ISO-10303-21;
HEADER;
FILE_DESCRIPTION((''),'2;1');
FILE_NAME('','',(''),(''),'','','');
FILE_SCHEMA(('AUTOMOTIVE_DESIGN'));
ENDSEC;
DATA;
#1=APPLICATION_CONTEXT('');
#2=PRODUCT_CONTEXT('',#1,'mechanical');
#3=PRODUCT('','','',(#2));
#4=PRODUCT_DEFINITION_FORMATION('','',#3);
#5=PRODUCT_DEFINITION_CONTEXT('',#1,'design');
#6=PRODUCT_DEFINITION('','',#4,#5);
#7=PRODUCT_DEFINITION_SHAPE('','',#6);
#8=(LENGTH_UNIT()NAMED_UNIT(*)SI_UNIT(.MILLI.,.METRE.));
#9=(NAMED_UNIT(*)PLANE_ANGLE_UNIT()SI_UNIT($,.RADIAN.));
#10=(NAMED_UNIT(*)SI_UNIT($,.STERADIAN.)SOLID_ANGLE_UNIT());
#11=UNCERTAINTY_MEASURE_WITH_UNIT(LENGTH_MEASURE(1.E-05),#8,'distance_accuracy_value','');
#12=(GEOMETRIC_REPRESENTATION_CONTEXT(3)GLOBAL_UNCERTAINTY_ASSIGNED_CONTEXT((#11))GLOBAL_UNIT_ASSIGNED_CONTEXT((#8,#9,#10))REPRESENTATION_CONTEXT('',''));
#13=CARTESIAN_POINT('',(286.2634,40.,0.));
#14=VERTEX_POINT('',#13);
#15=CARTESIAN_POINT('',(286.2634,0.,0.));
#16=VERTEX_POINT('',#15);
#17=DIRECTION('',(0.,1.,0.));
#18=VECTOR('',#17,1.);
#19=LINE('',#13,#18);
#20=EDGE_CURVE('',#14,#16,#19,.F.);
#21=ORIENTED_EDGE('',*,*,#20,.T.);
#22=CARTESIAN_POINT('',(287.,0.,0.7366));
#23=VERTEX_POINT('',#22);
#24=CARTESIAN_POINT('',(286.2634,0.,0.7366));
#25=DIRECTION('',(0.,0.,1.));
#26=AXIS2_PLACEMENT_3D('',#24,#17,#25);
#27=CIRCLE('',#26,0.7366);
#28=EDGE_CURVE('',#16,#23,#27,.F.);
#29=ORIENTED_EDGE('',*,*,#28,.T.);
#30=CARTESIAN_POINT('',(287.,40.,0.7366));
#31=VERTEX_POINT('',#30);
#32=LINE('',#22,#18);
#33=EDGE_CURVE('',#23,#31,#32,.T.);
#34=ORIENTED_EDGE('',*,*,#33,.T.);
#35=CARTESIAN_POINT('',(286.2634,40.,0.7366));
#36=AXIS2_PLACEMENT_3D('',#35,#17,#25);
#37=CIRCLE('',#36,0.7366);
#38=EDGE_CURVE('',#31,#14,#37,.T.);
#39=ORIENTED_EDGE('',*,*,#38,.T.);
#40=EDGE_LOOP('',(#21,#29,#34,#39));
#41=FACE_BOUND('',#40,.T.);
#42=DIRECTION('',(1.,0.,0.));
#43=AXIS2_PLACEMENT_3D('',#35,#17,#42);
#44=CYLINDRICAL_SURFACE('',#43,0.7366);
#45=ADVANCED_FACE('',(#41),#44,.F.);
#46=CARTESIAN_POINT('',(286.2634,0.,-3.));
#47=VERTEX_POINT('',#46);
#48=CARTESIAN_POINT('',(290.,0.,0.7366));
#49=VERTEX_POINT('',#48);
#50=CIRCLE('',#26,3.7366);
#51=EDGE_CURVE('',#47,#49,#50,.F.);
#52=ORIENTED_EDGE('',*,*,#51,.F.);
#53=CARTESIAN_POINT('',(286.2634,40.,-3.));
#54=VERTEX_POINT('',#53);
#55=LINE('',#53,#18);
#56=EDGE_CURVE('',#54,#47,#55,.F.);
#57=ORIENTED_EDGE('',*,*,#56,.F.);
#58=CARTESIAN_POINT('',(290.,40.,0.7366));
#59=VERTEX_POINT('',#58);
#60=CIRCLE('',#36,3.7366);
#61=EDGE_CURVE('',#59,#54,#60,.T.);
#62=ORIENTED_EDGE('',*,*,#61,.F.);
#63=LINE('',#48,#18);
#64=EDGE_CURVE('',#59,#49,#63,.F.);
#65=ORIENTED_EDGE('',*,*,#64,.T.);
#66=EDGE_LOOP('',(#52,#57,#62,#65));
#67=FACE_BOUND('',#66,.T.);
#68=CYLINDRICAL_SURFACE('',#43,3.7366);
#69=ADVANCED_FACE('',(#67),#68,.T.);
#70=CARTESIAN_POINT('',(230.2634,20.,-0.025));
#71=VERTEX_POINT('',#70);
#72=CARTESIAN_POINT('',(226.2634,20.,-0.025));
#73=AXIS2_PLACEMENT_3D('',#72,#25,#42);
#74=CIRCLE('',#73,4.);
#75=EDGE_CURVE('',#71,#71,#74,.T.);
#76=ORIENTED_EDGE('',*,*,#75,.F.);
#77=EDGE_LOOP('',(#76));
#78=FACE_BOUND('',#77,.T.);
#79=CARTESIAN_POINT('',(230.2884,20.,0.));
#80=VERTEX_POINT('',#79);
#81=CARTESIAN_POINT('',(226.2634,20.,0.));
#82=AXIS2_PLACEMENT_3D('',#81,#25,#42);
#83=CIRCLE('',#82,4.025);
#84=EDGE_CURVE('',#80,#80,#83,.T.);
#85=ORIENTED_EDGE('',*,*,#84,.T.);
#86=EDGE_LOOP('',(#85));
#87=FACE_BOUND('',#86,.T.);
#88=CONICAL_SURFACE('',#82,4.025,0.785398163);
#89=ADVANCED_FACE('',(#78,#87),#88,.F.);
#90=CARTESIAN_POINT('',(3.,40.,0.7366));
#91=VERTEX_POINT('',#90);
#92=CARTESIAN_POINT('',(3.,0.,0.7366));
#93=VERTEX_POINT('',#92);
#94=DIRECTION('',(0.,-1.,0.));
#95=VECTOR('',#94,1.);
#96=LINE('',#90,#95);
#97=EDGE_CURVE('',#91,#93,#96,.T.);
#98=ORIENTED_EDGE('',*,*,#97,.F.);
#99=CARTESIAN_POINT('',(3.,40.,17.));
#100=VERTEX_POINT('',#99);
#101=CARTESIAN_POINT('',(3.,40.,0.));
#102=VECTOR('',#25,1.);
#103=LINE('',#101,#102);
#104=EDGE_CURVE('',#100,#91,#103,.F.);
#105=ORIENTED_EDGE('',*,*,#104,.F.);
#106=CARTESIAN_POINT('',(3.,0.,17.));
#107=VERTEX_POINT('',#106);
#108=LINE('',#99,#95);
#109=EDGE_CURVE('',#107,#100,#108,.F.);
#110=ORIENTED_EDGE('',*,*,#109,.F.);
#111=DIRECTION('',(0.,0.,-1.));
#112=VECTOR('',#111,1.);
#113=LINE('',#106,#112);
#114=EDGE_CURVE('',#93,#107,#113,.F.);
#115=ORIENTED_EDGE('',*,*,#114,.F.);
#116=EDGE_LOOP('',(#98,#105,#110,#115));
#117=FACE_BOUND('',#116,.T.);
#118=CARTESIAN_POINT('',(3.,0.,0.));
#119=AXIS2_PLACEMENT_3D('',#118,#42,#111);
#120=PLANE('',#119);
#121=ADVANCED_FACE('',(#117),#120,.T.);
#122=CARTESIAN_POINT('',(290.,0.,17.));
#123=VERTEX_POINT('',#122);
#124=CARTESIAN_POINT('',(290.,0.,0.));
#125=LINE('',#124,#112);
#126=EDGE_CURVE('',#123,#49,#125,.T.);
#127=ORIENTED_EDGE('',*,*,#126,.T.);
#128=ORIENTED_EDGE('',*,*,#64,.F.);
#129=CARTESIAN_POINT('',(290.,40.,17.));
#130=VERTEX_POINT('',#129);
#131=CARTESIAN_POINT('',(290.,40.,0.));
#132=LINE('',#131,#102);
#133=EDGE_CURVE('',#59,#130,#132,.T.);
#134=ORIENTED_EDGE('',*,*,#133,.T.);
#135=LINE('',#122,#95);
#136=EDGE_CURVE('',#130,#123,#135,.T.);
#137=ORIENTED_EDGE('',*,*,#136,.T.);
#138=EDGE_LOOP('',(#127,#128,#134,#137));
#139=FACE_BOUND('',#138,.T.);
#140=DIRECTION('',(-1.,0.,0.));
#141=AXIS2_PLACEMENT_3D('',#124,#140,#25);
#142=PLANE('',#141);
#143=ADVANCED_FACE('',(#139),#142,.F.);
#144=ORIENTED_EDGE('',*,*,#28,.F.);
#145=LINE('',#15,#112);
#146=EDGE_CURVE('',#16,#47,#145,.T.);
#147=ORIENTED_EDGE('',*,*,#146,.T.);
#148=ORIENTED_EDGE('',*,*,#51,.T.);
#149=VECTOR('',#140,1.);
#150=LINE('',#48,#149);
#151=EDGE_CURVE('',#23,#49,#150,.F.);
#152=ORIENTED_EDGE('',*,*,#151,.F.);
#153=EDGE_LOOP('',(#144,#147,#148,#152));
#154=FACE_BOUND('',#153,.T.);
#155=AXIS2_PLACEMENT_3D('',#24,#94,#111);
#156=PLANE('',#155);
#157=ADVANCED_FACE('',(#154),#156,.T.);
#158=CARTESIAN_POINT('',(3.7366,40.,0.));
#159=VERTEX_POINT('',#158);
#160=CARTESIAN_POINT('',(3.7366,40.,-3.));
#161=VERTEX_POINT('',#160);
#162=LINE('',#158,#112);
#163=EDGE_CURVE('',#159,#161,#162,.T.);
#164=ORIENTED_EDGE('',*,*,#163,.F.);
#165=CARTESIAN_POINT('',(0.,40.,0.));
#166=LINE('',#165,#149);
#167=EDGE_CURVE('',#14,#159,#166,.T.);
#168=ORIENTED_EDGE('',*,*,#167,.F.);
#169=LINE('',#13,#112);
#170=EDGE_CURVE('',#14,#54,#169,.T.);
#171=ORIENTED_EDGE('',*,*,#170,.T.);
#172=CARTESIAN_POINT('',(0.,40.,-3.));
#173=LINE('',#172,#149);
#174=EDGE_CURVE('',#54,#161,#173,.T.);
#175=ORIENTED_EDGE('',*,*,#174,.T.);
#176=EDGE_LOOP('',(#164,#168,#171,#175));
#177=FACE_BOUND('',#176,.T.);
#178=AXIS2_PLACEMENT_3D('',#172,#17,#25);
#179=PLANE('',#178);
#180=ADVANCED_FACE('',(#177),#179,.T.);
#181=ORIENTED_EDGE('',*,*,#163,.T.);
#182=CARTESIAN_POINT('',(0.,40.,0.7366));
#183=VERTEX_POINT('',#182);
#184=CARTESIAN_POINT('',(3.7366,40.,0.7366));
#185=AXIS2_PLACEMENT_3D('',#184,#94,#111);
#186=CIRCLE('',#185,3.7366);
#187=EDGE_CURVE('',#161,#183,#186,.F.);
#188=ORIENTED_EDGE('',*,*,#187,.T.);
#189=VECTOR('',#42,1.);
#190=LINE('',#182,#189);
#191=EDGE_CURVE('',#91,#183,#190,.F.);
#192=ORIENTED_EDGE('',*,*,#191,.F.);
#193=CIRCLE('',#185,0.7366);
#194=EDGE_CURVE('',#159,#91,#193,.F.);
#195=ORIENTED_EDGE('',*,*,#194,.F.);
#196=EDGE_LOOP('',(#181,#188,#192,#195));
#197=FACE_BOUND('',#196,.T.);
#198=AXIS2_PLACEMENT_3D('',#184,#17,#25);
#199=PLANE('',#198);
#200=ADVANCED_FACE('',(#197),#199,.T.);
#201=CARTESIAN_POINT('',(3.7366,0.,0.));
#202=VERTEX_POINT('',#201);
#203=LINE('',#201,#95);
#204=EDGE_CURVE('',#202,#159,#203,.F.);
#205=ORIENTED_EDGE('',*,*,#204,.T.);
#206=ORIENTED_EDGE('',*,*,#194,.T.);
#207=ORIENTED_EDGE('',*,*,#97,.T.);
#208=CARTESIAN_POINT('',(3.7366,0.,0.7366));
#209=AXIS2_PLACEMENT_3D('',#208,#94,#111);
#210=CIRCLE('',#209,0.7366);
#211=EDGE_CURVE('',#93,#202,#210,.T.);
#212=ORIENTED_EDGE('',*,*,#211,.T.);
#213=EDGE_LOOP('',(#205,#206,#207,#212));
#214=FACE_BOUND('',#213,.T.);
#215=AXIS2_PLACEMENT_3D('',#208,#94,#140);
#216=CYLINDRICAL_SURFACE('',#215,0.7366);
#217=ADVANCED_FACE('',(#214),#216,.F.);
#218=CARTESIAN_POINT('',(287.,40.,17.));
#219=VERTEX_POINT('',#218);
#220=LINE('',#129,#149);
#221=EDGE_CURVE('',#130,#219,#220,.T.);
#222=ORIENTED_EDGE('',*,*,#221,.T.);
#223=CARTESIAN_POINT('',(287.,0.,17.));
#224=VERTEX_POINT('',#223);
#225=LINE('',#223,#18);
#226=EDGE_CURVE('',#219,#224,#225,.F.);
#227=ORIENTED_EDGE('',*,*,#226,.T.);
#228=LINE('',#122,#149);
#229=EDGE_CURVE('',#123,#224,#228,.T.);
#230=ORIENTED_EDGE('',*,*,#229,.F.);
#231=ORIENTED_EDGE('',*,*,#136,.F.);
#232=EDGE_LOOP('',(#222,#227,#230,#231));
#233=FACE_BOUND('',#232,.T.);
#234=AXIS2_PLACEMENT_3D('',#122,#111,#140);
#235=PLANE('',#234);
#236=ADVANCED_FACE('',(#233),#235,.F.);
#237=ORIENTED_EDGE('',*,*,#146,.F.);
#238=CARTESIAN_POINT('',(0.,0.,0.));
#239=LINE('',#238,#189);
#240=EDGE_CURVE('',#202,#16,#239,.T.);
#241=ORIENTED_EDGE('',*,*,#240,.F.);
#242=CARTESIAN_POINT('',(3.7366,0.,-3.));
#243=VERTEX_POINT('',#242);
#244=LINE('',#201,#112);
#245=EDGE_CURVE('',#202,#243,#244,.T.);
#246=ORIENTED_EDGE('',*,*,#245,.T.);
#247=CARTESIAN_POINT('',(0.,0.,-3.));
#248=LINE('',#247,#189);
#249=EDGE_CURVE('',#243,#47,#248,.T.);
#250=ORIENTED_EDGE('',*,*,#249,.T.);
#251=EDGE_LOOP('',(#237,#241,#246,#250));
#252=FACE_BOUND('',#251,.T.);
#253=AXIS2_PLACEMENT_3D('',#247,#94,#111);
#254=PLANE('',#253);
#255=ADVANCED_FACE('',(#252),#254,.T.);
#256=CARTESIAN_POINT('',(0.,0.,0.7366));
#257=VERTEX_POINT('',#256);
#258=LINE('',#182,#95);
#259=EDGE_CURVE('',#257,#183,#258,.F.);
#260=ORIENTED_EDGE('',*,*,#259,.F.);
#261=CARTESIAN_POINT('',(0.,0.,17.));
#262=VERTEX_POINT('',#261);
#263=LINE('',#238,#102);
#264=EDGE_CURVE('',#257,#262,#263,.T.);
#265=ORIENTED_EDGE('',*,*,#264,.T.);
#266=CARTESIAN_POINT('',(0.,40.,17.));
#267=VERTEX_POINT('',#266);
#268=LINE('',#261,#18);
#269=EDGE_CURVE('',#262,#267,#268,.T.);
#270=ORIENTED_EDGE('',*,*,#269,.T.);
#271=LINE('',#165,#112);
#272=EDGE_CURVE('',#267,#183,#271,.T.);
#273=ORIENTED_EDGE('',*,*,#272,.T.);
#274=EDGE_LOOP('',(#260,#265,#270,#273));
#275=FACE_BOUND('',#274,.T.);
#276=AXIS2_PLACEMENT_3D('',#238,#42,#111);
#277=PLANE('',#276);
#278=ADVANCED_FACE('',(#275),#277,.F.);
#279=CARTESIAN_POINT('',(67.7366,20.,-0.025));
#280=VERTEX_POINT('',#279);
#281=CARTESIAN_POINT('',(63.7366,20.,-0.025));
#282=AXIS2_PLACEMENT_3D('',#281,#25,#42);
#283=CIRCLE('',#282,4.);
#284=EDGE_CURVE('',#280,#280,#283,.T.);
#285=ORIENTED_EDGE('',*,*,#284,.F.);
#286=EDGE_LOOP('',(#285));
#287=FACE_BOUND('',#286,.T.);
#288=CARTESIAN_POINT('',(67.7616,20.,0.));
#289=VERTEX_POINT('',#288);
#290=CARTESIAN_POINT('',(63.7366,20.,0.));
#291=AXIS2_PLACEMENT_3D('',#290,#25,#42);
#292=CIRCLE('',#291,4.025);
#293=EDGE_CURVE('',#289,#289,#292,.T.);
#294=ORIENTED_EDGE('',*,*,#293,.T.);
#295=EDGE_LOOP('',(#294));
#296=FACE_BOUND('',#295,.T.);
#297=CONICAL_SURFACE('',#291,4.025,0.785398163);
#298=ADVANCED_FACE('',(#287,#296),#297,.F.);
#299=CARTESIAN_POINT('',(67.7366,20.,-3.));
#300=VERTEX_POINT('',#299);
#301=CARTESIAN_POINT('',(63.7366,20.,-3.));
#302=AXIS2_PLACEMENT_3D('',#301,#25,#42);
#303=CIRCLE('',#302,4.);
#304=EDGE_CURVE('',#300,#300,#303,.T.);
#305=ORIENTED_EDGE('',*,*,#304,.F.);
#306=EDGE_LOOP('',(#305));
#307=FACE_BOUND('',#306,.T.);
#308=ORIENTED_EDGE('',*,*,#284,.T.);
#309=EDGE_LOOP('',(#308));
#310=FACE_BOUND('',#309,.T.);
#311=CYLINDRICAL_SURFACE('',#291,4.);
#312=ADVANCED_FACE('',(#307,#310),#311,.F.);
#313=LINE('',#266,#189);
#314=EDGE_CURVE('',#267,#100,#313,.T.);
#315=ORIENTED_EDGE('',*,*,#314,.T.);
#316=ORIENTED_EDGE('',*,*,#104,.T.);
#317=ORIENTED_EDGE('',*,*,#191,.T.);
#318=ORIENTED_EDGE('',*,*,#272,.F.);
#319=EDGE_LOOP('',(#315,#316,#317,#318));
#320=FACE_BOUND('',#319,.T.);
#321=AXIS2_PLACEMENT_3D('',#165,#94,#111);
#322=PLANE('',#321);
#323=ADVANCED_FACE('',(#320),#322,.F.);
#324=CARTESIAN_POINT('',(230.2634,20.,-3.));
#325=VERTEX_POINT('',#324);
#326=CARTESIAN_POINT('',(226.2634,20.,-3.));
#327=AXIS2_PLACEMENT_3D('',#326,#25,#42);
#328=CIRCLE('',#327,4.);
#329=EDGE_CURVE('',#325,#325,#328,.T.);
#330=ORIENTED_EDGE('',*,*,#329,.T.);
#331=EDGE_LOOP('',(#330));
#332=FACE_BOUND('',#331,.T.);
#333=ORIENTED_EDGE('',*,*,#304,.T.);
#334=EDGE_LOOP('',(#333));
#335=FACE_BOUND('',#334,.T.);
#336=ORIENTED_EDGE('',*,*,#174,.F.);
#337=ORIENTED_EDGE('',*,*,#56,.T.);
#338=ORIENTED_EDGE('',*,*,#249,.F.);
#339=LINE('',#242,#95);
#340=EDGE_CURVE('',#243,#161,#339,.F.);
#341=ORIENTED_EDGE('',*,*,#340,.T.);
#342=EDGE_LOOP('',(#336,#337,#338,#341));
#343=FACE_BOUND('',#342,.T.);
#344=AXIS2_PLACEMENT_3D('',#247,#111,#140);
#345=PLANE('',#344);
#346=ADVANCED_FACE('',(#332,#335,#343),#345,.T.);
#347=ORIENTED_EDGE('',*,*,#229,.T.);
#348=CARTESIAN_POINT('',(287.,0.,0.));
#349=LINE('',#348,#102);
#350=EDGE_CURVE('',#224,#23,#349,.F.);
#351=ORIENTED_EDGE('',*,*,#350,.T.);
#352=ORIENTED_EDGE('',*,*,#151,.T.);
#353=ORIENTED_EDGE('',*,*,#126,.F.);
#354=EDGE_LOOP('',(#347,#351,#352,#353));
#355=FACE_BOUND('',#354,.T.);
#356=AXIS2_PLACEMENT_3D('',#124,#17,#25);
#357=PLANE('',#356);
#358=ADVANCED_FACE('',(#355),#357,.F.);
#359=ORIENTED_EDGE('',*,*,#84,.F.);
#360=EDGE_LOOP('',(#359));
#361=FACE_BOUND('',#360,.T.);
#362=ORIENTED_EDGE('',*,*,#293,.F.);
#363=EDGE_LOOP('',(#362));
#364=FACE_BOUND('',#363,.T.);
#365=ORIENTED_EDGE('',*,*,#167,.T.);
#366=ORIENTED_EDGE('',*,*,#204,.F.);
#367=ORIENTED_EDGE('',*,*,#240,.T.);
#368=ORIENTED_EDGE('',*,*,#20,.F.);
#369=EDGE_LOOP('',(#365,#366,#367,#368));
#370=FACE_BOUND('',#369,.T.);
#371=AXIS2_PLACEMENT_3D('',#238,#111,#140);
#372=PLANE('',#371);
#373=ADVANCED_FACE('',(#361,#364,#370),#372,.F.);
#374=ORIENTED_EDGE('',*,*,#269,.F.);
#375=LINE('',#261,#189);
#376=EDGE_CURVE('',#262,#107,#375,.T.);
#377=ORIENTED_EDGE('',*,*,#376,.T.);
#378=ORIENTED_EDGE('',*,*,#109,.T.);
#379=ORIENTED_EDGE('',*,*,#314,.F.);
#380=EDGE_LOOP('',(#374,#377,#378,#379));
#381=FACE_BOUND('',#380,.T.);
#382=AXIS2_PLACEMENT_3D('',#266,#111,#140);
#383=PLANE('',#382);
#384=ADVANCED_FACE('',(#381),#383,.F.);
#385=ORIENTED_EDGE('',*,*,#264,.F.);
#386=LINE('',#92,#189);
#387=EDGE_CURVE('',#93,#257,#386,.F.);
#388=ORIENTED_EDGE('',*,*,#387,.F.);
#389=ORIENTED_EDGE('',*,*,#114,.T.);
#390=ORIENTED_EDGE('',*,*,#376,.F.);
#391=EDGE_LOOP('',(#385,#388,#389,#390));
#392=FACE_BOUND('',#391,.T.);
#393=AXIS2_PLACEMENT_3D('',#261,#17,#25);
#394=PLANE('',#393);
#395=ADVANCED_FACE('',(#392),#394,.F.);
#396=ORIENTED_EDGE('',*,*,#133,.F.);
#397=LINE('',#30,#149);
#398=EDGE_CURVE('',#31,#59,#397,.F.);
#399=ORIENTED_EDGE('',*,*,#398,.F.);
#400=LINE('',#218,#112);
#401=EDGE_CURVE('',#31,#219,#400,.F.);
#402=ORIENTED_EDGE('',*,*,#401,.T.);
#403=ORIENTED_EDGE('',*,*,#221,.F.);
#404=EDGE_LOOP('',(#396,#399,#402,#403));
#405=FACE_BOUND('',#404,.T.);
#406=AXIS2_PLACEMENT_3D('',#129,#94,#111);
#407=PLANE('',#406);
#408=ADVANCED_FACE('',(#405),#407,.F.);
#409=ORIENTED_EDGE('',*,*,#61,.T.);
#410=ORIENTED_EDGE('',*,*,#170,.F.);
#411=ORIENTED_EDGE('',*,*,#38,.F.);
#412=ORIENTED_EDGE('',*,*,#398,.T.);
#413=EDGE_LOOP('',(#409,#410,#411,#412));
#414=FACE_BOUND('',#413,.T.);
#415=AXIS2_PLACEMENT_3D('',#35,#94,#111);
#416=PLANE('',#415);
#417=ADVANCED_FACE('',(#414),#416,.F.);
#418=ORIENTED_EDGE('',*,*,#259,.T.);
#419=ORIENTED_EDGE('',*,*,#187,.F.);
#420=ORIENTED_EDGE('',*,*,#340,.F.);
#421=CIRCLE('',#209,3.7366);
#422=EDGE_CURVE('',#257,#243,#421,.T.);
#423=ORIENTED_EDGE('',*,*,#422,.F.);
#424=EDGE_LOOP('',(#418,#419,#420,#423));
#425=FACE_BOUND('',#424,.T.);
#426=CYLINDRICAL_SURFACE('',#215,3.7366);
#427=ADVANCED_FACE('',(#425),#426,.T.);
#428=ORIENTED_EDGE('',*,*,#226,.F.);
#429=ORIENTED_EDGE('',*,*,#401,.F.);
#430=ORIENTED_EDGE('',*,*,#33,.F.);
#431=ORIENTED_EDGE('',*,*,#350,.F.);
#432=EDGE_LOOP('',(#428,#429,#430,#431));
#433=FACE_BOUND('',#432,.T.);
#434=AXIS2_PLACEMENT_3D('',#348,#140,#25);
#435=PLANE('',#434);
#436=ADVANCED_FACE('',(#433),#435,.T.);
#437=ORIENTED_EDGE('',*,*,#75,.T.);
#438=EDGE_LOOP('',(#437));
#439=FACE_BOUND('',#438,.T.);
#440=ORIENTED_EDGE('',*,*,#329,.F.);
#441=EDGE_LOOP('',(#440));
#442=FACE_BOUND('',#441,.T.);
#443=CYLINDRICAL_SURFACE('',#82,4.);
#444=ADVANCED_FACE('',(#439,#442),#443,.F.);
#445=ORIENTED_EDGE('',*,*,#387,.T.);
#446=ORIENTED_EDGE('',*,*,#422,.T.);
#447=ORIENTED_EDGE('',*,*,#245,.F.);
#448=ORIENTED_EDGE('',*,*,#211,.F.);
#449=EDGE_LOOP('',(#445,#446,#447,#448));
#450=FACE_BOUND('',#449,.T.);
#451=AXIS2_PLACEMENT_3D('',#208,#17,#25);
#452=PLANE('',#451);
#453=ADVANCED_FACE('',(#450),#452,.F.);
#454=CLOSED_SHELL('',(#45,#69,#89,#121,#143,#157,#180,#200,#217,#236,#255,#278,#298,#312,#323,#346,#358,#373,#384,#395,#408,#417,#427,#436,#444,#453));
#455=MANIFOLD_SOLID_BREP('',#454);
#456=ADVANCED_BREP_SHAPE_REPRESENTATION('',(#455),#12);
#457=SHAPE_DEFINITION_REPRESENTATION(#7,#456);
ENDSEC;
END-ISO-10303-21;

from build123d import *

# Parameters (mm, degrees)
SKETCH1_W                      = 290
SKETCH1_H                      = 40
BASE_FLANGE1_DEPTH             = 3
EDGE_FLANGE1_STRIP_W           = 13.4732
EDGE_FLANGE1_STRIP_H           = 3
EDGE_FLANGE1_STRIP_CUT_DEPTH   = 40
EDGE_FLANGE1_DEPTH             = 40
EDGE_FLANGE2_STRIP_W           = 13.4732
EDGE_FLANGE2_STRIP_H           = 3
EDGE_FLANGE2_STRIP_CUT_DEPTH   = 40
EDGE_FLANGE2_DEPTH             = 40
F_8_0MM_DOWEL_HOLE1_AT_2_COUNT = 2
F_8_0MM_DOWEL_HOLE1_AT_2_PITCH = 162.5268


# Sheet-metal steps are written as plain solids
with BuildPart() as part:
    # Sketch1 → Base-Flange1 (new body)
    with BuildSketch(Plane.XY):
        with Locations((145, 20)):
            Rectangle(SKETCH1_W, SKETCH1_H)
    extrude(amount=-BASE_FLANGE1_DEPTH)

    # Edge-Flange1 strip (across the edge) → Edge-Flange1 strip cut (cut)
    with BuildSketch(Plane.XZ.offset(-40)):
        with Locations((-3, -1.5)):
            Rectangle(EDGE_FLANGE1_STRIP_W, EDGE_FLANGE1_STRIP_H)
    extrude(amount=EDGE_FLANGE1_STRIP_CUT_DEPTH, mode=Mode.SUBTRACT)

    # Edge-Flange1 section (across the edge) → Edge-Flange1 (add)
    with BuildSketch(Plane.XZ.offset(-40)):
        with BuildLine():
            Line((0, 0.7366), (0, 17))
            Line((0, 17), (3, 17))
            Line((3, 17), (3, 0.7366))
            ThreePointArc((3, 0.7366), (3.215745145, 0.215745145), (3.7366, 0))
            Line((3.7366, 0), (3.7366, -3))
            ThreePointArc((3.7366, -3), (1.094424801, -1.905575199), (0, 0.7366))
        make_face()
    extrude(amount=EDGE_FLANGE1_DEPTH)

    # Edge-Flange2 strip (across the edge) → Edge-Flange2 strip cut (cut)
    with BuildSketch(Plane(origin=(290, 0, 0), x_dir=(-1, 0, 0), z_dir=(0, 1, 0))):
        with Locations((-3, -1.5)):
            Rectangle(EDGE_FLANGE2_STRIP_W, EDGE_FLANGE2_STRIP_H)
    extrude(amount=EDGE_FLANGE2_STRIP_CUT_DEPTH, mode=Mode.SUBTRACT)

    # Edge-Flange2 section (across the edge) → Edge-Flange2 (add)
    with BuildSketch(Plane(origin=(290, 0, 0), x_dir=(-1, 0, 0), z_dir=(0, 1, 0))):
        with BuildLine():
            Line((0, 0.7366), (0, 17))
            Line((0, 17), (3, 17))
            Line((3, 17), (3, 0.7366))
            ThreePointArc((3, 0.7366), (3.215745145, 0.215745145), (3.7366, 0))
            Line((3.7366, 0), (3.7366, -3))
            ThreePointArc((3.7366, -3), (1.094424801, -1.905575199), (0, 0.7366))
        make_face()
    extrude(amount=EDGE_FLANGE2_DEPTH)

    # Sketch13 → Ø8.0mm Dowel Hole1 (revolve, cut)
    with BuildSketch(Plane(origin=(226.2634, 20, 0), x_dir=(0, -1, 0), z_dir=(1, 0, 0))):
        Polygon((0, 0), (0, 3), (4, 3), (4, 0.025), (4.025, 0), align=None)
    f_8_0mm_dowel_hole1 = revolve(axis=Axis((226.2634, 20, 6.35), (0, 0, -1)), mode=Mode.SUBTRACT)

    # Ø8.0mm Dowel Hole1 at 2: Ø8.0mm Dowel Hole1 ×2
    with Locations(*[(-i * F_8_0MM_DOWEL_HOLE1_AT_2_PITCH, 0, 0) for i in range(1, F_8_0MM_DOWEL_HOLE1_AT_2_COUNT)]):
        add(f_8_0mm_dowel_hole1, mode=Mode.SUBTRACT)


solid = part.part
